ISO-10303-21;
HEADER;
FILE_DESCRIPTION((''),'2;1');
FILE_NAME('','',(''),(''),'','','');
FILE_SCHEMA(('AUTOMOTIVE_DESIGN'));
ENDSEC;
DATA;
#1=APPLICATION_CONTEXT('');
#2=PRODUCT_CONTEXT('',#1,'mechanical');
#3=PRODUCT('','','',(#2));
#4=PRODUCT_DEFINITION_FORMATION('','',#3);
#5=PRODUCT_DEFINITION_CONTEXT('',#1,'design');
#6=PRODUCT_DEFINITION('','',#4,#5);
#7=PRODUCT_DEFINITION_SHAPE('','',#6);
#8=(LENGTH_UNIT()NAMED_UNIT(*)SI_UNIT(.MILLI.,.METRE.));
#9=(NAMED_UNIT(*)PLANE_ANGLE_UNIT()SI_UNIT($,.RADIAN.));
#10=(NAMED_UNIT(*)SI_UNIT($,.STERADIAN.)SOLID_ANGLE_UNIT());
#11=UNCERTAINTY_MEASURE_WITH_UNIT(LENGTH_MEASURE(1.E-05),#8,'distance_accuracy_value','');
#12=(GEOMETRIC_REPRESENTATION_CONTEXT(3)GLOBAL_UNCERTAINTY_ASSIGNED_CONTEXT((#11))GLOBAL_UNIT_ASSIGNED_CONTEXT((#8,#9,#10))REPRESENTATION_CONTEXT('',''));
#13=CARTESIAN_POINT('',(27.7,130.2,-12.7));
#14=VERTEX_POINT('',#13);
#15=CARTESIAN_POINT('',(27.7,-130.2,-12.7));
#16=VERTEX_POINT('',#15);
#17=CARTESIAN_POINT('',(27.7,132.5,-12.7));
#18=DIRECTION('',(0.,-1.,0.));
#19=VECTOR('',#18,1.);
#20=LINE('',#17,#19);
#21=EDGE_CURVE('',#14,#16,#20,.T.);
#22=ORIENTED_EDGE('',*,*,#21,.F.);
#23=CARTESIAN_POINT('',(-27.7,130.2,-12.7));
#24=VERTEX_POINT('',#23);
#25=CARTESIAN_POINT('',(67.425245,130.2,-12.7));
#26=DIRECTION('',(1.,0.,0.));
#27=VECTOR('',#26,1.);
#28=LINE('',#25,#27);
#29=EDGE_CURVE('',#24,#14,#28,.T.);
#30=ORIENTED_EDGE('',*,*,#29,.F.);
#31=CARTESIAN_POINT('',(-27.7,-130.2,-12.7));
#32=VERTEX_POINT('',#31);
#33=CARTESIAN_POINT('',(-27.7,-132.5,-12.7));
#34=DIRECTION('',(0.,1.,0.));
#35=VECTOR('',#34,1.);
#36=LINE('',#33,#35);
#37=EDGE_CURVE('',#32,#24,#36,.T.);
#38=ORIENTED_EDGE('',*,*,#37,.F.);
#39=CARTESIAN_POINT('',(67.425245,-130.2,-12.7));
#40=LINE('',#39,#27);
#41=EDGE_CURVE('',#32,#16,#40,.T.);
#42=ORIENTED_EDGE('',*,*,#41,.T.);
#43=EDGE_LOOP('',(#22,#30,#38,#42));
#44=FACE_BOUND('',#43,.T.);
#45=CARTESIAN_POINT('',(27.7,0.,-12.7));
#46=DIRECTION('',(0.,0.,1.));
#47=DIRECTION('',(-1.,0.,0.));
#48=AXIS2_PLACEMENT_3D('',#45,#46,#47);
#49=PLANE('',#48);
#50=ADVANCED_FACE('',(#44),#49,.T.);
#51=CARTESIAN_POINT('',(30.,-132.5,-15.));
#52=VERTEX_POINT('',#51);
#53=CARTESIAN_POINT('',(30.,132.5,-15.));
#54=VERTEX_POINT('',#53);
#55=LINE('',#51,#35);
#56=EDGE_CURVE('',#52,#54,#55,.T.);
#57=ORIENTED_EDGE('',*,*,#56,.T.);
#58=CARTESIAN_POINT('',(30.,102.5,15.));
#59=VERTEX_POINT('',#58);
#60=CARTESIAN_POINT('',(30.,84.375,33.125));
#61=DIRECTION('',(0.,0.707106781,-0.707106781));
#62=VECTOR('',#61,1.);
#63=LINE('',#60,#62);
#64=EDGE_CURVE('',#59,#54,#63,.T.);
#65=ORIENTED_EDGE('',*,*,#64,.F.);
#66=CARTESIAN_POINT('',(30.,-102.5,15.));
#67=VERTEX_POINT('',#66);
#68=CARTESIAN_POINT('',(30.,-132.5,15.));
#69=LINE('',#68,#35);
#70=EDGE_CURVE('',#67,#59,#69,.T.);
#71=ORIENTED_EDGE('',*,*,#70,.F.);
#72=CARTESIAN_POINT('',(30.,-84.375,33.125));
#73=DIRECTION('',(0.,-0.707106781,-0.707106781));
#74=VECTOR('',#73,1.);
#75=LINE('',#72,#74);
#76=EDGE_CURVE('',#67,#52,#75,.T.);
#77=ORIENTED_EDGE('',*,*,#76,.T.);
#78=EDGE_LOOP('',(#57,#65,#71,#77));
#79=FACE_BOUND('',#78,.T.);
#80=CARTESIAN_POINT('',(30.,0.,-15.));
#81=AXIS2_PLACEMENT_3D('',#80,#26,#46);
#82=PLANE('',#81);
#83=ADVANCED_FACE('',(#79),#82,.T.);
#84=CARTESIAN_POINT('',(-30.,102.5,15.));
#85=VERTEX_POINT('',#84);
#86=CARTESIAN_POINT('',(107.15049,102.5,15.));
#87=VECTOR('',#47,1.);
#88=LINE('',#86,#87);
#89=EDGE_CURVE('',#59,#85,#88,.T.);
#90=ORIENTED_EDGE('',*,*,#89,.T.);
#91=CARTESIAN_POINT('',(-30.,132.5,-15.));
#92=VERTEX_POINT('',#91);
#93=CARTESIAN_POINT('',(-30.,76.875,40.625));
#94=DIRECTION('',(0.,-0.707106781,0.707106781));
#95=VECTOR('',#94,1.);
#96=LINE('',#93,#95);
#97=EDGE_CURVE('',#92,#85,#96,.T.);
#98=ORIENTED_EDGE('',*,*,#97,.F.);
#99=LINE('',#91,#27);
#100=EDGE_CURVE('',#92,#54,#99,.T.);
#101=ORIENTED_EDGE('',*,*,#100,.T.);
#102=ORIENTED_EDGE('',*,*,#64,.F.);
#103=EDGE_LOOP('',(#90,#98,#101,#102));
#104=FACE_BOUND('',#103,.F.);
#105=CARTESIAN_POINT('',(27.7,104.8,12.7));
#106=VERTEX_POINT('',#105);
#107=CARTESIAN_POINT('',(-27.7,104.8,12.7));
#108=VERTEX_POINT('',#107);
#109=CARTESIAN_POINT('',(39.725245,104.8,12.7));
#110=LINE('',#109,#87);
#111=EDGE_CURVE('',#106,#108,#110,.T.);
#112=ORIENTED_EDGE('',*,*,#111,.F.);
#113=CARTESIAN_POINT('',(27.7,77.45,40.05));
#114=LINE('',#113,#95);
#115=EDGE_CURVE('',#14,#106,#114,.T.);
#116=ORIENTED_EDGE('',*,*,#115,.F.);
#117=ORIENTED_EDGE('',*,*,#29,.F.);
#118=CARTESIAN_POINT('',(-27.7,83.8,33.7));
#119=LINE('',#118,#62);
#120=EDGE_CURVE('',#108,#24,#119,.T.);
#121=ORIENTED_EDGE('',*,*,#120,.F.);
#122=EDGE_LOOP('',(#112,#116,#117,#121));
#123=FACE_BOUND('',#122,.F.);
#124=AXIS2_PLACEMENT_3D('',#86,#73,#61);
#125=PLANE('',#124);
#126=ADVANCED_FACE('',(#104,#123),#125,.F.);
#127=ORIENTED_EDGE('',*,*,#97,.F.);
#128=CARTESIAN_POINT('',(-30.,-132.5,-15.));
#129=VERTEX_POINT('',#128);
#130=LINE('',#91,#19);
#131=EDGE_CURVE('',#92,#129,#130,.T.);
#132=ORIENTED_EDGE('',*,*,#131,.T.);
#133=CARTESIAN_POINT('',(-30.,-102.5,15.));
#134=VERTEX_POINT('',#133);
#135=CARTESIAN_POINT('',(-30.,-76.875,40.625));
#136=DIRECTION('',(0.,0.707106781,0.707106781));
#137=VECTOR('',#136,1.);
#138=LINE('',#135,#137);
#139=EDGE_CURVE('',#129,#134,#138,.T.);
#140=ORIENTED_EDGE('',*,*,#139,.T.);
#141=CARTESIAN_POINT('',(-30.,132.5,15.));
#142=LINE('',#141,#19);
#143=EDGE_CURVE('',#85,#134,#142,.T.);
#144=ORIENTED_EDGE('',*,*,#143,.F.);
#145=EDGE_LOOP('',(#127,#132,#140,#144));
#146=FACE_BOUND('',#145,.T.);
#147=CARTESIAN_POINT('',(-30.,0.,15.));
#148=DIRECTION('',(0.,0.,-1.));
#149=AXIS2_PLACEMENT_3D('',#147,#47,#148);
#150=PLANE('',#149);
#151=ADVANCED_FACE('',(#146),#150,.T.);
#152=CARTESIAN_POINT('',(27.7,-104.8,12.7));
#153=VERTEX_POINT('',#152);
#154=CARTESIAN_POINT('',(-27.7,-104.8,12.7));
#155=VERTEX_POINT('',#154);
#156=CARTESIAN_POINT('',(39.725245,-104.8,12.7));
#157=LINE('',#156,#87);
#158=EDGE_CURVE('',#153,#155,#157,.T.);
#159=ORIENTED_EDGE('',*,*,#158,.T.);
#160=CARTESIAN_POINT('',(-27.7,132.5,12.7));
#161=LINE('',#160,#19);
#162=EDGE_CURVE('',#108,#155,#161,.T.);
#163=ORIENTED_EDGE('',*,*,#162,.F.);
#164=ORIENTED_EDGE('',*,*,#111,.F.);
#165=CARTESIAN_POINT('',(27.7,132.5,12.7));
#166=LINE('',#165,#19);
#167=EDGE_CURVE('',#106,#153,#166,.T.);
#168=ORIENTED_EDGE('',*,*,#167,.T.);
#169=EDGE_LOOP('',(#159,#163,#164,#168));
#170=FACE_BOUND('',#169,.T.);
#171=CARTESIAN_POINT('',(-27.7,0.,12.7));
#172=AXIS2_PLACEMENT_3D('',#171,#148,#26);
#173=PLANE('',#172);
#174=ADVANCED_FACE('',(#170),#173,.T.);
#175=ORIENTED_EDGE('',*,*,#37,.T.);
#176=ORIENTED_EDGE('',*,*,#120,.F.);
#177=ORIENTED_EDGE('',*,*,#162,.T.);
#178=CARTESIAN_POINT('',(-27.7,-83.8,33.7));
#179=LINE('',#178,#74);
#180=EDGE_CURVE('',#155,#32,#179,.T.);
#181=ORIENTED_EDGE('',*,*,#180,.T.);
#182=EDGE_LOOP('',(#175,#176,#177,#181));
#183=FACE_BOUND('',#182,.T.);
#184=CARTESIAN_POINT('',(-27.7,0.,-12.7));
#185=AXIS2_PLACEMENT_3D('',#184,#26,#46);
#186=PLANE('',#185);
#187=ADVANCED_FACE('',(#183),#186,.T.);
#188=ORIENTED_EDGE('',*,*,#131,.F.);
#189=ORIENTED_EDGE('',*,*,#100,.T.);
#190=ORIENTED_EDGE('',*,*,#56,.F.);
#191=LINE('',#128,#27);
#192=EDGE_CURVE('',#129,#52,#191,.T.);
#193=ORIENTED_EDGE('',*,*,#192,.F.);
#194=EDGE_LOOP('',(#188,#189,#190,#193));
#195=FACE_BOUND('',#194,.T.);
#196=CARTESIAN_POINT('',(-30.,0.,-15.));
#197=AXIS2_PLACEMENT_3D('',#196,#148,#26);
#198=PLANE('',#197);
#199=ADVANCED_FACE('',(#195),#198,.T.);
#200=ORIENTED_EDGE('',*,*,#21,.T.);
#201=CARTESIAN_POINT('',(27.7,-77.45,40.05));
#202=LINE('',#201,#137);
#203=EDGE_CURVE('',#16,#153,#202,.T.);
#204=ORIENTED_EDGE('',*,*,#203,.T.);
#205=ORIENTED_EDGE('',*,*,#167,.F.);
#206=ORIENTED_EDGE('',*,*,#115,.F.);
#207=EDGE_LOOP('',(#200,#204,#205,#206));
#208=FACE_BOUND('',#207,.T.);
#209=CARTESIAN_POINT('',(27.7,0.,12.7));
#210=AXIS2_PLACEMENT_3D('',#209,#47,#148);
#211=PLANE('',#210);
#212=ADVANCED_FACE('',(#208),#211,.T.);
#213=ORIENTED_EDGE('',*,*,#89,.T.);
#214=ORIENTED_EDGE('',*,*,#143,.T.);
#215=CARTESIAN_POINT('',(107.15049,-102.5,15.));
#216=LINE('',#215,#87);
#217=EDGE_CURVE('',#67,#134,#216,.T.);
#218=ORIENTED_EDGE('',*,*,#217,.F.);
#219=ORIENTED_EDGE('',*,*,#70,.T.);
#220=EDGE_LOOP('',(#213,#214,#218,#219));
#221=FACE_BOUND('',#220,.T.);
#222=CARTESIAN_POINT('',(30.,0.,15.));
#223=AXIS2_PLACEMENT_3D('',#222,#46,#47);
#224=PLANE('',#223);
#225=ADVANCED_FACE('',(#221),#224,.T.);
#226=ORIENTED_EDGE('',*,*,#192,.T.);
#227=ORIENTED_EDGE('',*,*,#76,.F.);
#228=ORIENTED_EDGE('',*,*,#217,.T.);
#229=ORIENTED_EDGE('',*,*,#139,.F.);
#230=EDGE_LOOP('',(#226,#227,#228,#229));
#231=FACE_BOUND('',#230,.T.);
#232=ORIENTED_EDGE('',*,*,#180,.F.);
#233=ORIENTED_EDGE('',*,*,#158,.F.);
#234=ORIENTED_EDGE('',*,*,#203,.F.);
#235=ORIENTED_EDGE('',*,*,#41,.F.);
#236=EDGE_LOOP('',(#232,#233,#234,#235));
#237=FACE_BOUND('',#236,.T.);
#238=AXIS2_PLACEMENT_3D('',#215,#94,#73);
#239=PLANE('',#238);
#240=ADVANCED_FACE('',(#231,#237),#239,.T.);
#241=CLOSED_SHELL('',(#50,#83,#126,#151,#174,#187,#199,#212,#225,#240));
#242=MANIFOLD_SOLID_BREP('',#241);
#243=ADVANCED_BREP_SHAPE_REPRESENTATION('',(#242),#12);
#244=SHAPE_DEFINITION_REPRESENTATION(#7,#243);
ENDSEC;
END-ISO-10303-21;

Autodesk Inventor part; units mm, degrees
ref_plane "YZ Plane" through (0, 0, 0) normal (1, 0, 0) x (0, 1, 0)
ref_plane "XZ Plane" through (0, 0, 0) normal (0, 1, 0) x (-1, 0, 0)
ref_plane "XY Plane" through (0, 0, 0) normal (0, 0, 1) x (1, 0, 0)
sketch "スケッチ1" plane through (0, 0, 0) normal (0, 1, 0) x (-1, 0, 0)
  line L0 (-30, 15) -> (30, 15)
  line L1 (30, 15) -> (30, -15)
  line L2 (30, -15) -> (-30, -15)
  line L3 (-30, -15) -> (-30, 15)
  line L4 (-30, 15) -> (30, -15) construction
  line L5 (30, 15) -> (-30, -15) construction
  line L6 (27.7, -12.7) -> (27.7, 12.7)
  line L7 (27.7, 12.7) -> (-27.7, 12.7)
  line L8 (-27.7, 12.7) -> (-27.7, -12.7)
  line L9 (-27.7, -12.7) -> (27.7, -12.7)
  point P0 (0, 0)
  dimension "d0" = 60
  dimension "d1" = 30
  dimension "d2" = 2.3
extrude "押し出し1" add sketch "スケッチ1" along normal mid plane 265
chamfer "面取り1" distance 30 angle 45 2 edges at (0, 132.5, 15) (0, -132.5, 15)
properties part number "車輪受け"
